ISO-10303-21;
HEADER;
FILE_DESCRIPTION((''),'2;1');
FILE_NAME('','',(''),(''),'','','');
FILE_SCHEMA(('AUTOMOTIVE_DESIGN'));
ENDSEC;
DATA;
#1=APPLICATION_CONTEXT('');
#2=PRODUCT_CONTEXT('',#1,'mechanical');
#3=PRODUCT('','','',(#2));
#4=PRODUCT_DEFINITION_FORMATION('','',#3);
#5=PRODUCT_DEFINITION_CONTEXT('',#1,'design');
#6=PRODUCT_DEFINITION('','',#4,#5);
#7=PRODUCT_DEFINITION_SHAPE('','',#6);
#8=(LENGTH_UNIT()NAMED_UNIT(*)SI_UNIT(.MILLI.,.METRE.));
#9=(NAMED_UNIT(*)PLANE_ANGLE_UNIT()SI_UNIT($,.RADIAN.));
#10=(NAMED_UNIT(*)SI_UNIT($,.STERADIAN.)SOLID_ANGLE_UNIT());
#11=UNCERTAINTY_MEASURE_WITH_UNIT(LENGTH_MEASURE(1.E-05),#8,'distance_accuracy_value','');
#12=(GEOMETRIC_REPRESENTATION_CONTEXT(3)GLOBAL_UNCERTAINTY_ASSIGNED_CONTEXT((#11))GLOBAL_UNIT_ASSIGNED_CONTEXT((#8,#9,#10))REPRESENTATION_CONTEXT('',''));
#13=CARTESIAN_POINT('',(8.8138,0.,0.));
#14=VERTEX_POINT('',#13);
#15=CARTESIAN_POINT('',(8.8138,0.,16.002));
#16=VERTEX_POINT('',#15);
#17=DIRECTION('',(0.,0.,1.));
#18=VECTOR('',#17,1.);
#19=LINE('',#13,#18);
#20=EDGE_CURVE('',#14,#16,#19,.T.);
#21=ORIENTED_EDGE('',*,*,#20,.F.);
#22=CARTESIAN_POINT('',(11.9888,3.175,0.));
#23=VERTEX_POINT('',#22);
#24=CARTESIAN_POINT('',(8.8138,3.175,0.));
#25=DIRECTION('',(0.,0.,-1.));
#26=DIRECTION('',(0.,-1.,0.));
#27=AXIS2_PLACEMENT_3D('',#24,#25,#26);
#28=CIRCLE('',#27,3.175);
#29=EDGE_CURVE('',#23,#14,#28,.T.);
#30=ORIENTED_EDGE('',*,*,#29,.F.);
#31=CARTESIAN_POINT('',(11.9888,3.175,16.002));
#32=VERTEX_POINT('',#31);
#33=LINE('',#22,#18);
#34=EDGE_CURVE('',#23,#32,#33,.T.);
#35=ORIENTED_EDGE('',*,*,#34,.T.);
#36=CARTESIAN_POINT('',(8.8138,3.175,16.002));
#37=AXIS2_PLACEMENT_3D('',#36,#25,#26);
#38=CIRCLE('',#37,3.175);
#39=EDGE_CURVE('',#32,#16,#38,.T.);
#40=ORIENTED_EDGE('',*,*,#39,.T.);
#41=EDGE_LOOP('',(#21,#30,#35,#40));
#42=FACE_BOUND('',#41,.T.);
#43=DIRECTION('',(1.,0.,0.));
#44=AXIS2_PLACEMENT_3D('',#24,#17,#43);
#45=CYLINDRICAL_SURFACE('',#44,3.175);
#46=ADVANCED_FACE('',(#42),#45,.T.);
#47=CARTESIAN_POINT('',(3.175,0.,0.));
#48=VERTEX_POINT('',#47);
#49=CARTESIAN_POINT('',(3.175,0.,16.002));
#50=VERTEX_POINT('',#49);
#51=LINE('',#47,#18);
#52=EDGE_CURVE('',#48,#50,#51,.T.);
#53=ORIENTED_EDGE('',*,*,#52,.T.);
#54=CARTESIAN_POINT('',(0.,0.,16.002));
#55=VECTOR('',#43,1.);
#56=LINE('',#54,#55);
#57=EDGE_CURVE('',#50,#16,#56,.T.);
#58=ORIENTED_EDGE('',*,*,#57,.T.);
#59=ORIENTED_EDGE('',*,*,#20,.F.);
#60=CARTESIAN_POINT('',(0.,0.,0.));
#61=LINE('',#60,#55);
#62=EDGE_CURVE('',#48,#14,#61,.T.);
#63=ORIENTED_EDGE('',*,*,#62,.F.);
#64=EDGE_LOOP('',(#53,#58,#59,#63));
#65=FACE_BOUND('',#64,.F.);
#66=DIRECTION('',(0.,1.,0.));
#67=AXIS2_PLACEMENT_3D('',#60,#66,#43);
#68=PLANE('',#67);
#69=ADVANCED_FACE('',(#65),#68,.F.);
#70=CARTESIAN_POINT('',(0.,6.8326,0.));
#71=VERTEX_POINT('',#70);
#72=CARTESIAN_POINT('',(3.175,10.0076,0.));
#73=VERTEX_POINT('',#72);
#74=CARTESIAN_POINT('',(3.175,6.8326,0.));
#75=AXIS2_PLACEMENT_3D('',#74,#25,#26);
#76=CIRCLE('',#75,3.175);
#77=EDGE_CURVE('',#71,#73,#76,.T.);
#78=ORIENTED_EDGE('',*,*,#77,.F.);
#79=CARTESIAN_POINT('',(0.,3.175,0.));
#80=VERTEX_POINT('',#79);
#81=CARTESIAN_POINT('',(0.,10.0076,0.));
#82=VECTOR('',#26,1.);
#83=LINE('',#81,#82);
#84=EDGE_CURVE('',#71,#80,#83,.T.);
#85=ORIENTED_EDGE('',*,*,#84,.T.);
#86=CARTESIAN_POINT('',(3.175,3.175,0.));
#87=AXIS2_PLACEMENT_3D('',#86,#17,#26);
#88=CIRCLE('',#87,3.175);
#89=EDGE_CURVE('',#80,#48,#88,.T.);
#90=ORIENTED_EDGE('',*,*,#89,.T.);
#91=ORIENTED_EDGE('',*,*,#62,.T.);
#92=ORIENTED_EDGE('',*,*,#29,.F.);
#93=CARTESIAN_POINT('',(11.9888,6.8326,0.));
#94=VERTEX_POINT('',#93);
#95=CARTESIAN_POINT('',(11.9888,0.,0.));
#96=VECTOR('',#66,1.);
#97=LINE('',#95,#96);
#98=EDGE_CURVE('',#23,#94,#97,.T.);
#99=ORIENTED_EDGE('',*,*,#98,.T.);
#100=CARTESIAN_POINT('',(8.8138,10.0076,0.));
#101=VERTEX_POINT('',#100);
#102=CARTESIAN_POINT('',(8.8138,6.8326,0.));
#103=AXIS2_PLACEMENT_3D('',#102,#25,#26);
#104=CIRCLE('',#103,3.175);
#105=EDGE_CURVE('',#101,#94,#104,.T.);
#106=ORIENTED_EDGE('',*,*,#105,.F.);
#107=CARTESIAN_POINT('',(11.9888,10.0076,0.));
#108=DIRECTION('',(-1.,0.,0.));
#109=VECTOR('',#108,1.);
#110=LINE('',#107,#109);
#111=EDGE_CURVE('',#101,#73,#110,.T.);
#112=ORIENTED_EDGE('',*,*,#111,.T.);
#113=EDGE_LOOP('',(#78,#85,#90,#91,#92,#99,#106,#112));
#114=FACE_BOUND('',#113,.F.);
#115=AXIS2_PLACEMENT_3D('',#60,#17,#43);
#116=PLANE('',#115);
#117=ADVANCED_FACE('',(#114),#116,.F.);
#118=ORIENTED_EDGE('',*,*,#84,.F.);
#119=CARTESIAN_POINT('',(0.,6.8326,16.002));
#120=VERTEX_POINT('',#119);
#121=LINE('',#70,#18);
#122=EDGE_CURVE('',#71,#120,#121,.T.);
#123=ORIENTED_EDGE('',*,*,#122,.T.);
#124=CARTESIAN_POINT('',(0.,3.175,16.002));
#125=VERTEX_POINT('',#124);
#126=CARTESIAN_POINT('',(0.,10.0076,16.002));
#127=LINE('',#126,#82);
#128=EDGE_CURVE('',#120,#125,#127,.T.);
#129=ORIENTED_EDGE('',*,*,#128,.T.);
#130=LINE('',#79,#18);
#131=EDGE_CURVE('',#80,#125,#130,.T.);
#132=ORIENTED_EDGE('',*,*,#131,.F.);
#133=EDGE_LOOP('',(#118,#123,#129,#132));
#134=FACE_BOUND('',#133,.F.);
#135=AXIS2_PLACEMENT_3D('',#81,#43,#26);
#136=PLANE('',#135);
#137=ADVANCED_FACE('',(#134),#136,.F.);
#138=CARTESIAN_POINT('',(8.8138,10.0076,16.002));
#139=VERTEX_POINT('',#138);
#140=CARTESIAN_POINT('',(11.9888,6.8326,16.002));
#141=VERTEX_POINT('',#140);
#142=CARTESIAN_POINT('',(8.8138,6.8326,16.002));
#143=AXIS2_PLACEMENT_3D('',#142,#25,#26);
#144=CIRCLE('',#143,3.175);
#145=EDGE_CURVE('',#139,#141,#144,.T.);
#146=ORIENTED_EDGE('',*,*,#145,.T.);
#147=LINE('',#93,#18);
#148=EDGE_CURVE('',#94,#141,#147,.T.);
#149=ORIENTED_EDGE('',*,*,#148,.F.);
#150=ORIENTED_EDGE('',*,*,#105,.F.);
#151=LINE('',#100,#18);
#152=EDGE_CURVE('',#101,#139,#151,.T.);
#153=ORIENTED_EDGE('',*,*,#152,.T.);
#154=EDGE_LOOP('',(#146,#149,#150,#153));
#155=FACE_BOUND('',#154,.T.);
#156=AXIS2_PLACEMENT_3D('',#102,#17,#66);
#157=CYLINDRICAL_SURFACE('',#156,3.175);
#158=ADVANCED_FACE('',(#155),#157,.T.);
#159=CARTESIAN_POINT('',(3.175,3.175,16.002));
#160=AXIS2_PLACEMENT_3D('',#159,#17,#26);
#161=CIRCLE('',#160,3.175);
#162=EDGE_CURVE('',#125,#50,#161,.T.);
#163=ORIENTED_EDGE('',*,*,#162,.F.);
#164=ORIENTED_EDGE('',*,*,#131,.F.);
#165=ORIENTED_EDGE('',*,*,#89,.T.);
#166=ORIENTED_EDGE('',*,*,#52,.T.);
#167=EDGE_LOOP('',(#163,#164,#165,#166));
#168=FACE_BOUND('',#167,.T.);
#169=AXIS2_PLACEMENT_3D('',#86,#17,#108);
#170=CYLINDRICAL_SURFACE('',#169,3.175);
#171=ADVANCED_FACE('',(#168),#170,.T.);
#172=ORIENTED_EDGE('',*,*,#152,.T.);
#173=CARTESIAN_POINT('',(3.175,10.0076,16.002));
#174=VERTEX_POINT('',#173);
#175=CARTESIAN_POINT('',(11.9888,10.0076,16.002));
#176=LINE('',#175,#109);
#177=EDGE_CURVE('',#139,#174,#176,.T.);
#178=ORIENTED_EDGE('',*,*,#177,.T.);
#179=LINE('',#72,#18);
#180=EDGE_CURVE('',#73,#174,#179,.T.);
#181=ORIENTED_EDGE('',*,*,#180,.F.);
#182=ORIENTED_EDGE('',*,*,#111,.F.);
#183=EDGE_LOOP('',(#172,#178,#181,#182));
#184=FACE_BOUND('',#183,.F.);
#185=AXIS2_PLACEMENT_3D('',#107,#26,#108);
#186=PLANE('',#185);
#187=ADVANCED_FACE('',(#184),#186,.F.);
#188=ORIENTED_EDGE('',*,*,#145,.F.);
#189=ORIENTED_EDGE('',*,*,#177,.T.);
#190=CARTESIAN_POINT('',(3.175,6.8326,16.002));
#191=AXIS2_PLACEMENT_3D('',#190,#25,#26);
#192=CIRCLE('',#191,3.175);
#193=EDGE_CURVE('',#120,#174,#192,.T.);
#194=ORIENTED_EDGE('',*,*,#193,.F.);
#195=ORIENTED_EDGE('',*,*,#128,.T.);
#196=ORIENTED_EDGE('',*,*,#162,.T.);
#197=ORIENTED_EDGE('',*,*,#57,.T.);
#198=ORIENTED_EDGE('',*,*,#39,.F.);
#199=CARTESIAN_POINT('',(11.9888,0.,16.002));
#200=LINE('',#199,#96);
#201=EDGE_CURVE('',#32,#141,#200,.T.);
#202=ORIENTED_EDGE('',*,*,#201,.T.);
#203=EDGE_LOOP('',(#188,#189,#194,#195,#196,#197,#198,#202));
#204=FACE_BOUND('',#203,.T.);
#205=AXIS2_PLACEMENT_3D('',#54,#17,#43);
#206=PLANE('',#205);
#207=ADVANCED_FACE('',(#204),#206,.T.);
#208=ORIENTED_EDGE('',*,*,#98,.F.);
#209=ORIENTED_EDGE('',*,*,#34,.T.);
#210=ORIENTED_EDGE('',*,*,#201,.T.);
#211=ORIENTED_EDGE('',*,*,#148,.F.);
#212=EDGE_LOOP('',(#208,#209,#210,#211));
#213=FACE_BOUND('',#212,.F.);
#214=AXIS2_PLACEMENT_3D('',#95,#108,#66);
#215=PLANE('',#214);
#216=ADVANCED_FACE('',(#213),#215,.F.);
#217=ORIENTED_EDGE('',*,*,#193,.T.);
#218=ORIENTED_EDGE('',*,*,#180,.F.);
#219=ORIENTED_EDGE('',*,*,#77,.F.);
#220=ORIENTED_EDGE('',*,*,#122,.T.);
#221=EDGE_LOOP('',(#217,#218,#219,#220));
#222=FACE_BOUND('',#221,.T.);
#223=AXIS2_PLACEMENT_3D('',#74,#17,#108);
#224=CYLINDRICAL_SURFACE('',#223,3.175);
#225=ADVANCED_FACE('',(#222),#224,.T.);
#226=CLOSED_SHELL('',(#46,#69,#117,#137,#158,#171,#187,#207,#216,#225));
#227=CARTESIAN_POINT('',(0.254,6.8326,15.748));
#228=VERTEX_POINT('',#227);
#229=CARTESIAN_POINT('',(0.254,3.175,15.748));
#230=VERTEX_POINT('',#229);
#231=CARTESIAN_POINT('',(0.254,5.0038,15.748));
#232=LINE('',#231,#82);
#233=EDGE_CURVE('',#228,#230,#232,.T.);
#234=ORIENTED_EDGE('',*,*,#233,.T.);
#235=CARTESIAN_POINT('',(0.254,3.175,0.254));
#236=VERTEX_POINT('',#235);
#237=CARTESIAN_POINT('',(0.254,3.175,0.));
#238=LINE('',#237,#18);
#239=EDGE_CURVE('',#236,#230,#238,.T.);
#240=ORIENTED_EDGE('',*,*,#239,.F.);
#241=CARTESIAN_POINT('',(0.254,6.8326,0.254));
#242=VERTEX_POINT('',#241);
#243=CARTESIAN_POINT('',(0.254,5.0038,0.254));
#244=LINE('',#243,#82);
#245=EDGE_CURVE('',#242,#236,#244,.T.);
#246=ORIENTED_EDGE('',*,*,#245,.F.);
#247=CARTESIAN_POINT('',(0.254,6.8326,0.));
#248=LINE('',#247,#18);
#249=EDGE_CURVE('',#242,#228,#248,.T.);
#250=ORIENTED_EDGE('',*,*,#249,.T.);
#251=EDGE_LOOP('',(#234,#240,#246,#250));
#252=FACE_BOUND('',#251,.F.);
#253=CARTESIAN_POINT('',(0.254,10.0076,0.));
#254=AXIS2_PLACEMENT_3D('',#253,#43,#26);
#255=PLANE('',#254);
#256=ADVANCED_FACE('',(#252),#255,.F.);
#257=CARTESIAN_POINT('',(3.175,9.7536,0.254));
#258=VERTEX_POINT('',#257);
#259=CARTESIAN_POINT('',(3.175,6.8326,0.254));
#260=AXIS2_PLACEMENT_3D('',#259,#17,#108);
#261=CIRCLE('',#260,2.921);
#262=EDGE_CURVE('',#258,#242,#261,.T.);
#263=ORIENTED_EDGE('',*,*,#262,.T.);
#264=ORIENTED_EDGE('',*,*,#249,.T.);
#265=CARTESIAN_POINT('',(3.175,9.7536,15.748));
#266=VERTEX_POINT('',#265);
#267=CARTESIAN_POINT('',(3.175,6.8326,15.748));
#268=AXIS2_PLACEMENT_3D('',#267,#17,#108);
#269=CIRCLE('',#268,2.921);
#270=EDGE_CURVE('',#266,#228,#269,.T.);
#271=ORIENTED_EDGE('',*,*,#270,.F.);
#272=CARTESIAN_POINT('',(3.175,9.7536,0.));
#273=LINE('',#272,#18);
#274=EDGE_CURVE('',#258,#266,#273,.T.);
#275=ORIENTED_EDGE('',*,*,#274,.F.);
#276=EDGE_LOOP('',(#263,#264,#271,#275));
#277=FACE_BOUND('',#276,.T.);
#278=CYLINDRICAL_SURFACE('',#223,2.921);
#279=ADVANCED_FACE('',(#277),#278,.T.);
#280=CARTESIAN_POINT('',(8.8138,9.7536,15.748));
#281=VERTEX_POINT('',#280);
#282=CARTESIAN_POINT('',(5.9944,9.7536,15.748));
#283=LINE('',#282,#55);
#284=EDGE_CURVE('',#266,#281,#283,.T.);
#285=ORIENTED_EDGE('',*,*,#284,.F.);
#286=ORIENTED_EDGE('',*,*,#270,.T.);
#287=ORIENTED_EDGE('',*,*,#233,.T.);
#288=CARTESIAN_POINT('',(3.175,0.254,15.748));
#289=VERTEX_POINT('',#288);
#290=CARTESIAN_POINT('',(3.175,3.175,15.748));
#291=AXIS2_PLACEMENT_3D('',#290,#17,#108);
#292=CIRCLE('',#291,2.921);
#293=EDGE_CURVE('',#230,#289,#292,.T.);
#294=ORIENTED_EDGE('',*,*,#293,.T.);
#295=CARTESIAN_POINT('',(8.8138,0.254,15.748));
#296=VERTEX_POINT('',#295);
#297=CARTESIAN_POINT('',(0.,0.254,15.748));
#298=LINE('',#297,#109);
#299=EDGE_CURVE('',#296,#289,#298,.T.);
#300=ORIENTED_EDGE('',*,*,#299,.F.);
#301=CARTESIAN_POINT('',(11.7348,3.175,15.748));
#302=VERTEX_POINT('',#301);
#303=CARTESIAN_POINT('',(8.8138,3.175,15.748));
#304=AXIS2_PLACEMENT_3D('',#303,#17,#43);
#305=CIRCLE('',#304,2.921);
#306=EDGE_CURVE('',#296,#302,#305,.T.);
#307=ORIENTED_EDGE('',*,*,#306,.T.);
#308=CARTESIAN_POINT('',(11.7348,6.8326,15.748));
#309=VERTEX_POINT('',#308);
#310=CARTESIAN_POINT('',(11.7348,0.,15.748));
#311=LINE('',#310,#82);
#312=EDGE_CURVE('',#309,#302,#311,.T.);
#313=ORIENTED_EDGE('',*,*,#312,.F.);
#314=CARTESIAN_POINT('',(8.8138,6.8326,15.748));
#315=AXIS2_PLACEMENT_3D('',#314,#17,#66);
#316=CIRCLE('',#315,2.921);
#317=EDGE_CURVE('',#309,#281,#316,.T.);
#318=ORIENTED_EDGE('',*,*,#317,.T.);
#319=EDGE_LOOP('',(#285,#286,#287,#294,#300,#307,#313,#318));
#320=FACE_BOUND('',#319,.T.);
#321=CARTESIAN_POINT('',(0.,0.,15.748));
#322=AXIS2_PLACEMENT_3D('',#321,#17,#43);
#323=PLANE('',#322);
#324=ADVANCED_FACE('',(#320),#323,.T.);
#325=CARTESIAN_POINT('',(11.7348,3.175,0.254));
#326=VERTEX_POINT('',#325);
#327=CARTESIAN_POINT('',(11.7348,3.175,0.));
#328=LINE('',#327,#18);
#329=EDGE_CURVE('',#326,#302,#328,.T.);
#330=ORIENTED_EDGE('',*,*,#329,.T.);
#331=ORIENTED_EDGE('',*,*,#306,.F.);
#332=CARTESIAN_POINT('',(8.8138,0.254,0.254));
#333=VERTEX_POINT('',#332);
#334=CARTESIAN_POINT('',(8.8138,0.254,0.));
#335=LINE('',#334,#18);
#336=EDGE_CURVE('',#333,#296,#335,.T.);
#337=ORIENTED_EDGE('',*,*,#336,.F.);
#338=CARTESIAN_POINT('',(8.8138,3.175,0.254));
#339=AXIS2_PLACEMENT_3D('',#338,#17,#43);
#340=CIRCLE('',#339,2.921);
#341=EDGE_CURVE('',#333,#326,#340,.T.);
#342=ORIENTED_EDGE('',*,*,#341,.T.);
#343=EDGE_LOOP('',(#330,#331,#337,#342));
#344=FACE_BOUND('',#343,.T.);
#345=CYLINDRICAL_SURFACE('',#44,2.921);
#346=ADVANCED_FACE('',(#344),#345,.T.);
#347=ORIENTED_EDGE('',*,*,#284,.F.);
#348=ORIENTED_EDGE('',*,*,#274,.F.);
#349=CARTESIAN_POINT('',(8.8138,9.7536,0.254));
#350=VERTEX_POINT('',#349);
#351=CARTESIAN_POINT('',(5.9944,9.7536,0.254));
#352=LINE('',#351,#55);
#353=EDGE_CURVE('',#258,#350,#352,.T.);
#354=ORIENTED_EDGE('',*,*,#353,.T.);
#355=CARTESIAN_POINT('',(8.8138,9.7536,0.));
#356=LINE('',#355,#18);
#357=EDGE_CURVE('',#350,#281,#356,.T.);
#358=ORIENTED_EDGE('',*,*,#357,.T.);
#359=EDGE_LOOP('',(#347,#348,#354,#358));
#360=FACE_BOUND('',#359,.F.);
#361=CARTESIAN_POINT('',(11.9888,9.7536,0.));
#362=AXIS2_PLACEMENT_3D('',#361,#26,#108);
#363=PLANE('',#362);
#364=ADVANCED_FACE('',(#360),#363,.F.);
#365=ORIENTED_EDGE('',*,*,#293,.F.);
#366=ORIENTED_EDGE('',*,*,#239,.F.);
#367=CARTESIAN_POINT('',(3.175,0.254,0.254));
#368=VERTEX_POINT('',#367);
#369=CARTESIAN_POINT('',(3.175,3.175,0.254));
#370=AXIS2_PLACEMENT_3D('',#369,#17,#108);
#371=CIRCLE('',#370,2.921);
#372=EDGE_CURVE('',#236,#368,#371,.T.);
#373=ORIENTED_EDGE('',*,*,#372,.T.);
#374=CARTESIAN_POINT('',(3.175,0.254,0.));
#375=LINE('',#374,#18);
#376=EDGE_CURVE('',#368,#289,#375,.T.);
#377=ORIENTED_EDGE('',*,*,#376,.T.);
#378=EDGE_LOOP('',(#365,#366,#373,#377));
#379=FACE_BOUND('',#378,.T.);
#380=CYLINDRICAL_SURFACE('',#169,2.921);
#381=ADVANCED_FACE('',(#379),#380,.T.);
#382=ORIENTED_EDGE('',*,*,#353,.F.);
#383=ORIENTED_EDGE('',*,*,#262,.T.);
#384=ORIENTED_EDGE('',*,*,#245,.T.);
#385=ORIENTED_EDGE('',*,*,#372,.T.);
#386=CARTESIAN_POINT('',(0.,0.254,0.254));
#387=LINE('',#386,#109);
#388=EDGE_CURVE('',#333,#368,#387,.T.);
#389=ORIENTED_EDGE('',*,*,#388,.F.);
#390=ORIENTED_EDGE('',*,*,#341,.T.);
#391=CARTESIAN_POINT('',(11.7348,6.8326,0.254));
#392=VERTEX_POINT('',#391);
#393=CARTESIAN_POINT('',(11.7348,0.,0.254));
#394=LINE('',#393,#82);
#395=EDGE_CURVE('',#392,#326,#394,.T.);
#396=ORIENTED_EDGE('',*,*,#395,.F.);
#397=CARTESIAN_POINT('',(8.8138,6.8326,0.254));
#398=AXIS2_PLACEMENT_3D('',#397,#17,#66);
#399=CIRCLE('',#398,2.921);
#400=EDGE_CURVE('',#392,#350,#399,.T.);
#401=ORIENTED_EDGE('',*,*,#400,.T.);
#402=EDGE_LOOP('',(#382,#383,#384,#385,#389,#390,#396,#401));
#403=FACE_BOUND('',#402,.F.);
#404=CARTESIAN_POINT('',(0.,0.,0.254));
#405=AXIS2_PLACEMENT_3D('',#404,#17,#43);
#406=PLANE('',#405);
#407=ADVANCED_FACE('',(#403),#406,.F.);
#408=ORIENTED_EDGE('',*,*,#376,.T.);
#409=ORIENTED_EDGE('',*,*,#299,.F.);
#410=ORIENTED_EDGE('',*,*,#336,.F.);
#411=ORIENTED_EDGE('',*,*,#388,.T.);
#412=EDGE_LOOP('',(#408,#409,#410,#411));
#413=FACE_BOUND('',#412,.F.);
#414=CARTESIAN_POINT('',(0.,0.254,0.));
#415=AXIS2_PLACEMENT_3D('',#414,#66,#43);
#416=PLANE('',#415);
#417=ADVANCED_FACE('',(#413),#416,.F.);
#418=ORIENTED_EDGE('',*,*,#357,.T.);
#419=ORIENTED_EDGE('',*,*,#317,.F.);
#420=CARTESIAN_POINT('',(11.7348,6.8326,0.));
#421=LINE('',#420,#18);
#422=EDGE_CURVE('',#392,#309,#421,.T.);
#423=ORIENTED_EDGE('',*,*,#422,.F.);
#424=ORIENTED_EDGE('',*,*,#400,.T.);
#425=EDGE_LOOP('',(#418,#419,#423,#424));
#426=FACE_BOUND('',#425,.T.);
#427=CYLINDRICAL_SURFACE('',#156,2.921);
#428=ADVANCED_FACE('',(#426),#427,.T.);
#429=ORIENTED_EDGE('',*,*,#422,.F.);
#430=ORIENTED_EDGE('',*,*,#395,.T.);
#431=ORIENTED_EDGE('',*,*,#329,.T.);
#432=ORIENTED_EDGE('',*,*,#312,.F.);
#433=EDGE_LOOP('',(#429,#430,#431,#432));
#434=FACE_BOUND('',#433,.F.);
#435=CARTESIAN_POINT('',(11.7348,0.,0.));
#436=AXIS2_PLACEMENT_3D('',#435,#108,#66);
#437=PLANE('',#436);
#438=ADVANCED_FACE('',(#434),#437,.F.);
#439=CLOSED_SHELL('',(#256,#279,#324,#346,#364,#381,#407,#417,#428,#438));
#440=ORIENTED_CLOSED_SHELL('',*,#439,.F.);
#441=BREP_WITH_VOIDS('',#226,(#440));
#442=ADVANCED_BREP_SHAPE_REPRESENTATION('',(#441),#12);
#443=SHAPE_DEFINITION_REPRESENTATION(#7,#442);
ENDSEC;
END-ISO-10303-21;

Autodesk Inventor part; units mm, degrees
ref_plane "YZ Plane" through (0, 0, 0) normal (1, 0, 0) x (0, 1, 0)
ref_plane "XZ Plane" through (0, 0, 0) normal (0, 1, 0) x (-1, 0, 0)
ref_plane "XY Plane" through (0, 0, 0) normal (0, 0, 1) x (1, 0, 0)
sketch "Sketch1" plane through (0, 0, 0) normal (0, 0, 1) x (1, 0, 0)
  line L0 (0, 0) -> (11.9888, 0)
  line L1 (11.9888, 0) -> (11.9888, 10.0076)
  line L2 (11.9888, 10.0076) -> (0, 10.0076)
  line L3 (0, 10.0076) -> (0, 0)
  dimension "d0" = 10.0076
  dimension "d1" = 11.9888
extrude "Extrusion1" add sketch "Sketch1" along normal blind 16.002
fillet "Fillet1" radius 3.175 4 edges at (11.9888, 10.0076, 8.001) (0, 10.0076, 8.001) (11.9888, 0, 8.001) (0, 0, 8.001)
shell "Shell2" thickness 0.254 removed faces 0
properties part number "Gearmotor_Motor" material "Stainless Steel"
